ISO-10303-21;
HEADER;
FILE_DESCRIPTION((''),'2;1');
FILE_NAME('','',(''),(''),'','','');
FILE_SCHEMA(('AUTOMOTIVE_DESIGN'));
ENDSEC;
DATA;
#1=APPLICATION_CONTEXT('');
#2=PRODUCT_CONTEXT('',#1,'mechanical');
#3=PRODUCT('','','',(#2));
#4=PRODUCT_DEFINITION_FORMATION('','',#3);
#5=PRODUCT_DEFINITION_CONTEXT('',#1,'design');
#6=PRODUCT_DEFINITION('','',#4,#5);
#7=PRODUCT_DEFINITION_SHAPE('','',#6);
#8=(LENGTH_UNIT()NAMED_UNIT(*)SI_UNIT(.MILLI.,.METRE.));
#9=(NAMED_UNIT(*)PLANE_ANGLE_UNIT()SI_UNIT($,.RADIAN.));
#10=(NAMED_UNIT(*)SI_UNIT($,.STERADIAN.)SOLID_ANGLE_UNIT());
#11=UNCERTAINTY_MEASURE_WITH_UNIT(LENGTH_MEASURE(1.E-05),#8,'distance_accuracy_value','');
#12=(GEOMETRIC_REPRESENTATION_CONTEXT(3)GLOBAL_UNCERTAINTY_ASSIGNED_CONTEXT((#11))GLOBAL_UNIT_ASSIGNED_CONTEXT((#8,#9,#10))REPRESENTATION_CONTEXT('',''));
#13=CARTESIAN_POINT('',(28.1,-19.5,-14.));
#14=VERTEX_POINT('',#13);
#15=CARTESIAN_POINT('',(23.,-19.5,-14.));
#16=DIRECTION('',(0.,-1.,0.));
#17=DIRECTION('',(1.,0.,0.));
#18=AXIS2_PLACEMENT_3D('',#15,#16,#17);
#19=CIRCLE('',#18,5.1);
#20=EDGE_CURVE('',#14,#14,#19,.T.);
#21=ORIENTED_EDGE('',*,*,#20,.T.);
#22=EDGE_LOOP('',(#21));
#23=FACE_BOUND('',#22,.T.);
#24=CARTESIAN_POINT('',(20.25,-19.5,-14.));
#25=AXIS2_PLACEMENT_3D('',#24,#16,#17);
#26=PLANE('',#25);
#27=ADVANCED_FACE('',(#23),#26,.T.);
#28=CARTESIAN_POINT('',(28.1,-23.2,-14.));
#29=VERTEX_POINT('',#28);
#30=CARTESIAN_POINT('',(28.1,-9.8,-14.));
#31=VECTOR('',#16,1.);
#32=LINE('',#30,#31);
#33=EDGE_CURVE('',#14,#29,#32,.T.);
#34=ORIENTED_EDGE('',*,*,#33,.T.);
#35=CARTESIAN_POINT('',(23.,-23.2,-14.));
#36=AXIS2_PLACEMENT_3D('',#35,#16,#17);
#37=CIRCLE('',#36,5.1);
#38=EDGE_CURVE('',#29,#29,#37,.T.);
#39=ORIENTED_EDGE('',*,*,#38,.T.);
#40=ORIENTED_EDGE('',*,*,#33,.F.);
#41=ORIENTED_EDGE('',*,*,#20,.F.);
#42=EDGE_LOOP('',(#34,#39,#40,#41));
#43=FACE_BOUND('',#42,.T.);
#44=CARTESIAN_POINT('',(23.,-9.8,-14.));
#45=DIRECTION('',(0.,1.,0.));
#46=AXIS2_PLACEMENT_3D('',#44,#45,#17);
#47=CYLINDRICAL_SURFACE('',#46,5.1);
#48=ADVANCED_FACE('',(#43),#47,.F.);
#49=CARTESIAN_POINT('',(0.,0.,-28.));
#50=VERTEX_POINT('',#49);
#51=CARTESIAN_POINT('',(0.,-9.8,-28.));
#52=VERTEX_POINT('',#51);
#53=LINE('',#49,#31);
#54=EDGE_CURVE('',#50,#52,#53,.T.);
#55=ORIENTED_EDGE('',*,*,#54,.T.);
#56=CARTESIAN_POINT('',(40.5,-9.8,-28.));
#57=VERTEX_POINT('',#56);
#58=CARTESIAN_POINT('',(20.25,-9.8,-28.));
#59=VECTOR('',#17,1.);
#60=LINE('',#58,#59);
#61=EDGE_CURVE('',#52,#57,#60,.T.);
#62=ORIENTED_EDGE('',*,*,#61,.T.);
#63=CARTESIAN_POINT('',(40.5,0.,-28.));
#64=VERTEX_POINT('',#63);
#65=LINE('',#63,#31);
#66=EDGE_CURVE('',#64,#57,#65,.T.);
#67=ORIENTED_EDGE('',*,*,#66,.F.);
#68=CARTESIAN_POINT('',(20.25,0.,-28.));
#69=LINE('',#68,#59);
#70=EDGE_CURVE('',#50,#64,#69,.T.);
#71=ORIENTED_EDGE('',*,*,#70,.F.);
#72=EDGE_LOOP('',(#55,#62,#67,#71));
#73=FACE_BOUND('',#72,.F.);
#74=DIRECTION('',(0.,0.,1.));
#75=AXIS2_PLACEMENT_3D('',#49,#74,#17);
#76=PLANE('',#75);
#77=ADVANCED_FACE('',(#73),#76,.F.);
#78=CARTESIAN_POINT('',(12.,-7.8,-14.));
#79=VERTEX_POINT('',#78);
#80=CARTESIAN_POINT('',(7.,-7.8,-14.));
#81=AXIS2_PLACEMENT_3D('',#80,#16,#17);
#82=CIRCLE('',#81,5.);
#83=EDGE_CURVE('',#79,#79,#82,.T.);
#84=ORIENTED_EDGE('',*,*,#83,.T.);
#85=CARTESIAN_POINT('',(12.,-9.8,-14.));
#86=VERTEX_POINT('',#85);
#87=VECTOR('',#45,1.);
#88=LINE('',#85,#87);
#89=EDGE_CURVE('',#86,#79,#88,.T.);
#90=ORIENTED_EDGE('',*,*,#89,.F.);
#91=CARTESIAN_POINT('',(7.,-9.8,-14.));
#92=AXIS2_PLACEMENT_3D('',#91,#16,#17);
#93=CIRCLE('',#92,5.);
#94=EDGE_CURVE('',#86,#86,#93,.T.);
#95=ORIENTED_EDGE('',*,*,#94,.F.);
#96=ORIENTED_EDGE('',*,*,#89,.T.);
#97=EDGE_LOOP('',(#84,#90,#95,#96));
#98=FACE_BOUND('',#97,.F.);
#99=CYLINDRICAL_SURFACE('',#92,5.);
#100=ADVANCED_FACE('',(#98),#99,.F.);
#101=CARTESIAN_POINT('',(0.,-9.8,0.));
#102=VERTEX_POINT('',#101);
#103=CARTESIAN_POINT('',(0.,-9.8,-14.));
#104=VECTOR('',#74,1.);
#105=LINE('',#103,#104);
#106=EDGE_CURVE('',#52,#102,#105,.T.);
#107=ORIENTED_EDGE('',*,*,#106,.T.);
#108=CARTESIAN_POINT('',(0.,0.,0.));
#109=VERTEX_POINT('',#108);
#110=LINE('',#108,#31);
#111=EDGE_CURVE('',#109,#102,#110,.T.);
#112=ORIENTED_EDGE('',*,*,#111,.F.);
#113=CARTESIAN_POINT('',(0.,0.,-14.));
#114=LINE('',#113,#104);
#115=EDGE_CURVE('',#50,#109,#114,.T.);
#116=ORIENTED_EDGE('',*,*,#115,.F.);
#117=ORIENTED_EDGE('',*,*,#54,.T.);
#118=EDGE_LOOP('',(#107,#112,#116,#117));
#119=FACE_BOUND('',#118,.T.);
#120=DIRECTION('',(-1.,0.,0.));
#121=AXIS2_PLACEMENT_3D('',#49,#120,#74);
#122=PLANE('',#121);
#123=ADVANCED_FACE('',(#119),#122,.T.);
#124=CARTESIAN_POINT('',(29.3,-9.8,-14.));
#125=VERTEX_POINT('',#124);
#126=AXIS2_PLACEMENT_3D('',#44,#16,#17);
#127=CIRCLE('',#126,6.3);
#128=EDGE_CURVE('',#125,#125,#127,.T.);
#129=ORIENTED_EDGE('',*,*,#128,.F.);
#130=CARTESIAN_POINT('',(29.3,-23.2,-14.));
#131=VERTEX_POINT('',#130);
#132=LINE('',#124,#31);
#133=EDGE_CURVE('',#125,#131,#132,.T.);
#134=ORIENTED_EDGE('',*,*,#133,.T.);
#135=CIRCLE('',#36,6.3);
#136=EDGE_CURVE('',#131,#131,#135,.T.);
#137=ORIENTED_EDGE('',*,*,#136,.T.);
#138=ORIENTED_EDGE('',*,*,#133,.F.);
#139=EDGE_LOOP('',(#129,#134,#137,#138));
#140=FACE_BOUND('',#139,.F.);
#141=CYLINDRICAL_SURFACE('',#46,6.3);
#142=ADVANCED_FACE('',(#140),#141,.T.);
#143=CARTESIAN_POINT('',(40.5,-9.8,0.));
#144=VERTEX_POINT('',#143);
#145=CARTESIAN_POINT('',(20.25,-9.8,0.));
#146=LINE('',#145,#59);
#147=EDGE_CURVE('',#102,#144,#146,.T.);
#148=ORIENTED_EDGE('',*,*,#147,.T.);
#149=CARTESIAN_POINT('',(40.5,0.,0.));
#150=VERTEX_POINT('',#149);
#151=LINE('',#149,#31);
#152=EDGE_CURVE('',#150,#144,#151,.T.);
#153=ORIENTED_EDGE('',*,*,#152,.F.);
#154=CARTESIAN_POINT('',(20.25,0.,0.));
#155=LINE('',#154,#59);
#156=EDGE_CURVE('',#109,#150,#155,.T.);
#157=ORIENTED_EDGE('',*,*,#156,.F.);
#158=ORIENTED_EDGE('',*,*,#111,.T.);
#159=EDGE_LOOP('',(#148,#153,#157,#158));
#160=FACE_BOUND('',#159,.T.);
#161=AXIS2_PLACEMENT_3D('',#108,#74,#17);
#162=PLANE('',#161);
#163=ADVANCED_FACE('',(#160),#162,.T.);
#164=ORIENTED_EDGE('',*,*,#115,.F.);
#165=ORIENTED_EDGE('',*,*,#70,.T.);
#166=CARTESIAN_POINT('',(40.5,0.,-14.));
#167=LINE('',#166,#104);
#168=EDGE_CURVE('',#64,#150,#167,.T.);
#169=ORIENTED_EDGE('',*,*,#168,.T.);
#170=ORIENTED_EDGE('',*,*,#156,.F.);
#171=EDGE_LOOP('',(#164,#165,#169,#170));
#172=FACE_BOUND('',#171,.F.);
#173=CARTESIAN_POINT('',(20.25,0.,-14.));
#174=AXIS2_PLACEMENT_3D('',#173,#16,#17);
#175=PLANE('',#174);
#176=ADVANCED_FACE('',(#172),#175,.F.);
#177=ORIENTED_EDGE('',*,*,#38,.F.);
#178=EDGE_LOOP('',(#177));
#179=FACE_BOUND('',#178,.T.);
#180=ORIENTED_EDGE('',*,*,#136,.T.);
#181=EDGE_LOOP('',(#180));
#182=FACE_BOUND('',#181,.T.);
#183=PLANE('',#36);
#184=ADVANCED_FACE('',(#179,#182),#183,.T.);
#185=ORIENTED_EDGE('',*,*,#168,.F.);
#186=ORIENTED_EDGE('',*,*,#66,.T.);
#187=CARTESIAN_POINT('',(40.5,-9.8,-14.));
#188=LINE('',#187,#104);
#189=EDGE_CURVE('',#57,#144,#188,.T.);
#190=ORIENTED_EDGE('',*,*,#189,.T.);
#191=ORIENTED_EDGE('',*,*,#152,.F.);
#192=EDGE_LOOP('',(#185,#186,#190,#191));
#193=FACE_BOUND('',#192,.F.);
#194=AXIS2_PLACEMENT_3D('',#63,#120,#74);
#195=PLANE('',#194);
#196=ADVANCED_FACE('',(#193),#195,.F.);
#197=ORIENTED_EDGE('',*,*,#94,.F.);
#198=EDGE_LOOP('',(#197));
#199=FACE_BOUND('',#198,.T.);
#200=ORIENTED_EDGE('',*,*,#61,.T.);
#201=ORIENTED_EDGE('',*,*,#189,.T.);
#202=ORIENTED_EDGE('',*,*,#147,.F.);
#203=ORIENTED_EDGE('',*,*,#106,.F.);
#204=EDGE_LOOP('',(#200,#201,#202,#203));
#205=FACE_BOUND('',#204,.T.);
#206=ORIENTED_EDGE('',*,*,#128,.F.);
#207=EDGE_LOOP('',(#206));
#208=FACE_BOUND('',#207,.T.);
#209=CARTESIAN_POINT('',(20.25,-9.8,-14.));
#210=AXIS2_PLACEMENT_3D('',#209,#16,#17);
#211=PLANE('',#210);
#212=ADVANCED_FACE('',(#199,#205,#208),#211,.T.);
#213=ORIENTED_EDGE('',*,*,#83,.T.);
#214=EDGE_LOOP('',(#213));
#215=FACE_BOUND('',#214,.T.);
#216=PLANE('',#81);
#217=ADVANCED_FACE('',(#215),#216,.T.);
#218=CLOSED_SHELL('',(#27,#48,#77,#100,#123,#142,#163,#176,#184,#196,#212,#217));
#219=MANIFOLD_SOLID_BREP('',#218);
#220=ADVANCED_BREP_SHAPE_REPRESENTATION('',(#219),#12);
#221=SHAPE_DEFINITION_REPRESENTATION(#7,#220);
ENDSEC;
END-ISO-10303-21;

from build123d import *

# Parameters (mm, degrees)
F0_W     = 40.5
F0_H     = 28
F1_DEPTH = 9.8
F2_R     = 6.3
F2_R_2   = 5.1
F3_DEPTH = 13.4
F4_DEPTH = 9.7
F5_R     = 5
F6_DEPTH = 2


# Not quite as in the source:
# - a feature of the source that left no trace in its solid (it failed there, or was rolled back) is left out


with BuildPart() as f1:
    # F0 (on Front) → F1 (new body)
    with BuildSketch(Plane.XZ):
        with Locations((20.25, -14)):
            Rectangle(F0_W, F0_H)
    extrude(amount=F1_DEPTH)

    # F2 (on face) → F3 (join)
    with BuildSketch(Plane.XZ.offset(9.8)):
        with Locations((23, -14)):
            Circle(F2_R)
        with Locations((23, -14)):
            Circle(F2_R_2, mode=Mode.SUBTRACT)
    extrude(amount=F3_DEPTH)

    # F4 (add): a face of the model
    f4_faces = [f1.faces().sort_by_distance(p)[0] for p in [
        (23, -9.8, -14),
    ]]
    extrude(f4_faces, amount=F4_DEPTH)

    # F5 (on face) → F6 (cut)
    with BuildSketch(Plane.XZ.offset(9.8)):
        with Locations((7, -14)):
            Circle(F5_R)
    extrude(amount=-F6_DEPTH, mode=Mode.SUBTRACT)


solid = f1.part
